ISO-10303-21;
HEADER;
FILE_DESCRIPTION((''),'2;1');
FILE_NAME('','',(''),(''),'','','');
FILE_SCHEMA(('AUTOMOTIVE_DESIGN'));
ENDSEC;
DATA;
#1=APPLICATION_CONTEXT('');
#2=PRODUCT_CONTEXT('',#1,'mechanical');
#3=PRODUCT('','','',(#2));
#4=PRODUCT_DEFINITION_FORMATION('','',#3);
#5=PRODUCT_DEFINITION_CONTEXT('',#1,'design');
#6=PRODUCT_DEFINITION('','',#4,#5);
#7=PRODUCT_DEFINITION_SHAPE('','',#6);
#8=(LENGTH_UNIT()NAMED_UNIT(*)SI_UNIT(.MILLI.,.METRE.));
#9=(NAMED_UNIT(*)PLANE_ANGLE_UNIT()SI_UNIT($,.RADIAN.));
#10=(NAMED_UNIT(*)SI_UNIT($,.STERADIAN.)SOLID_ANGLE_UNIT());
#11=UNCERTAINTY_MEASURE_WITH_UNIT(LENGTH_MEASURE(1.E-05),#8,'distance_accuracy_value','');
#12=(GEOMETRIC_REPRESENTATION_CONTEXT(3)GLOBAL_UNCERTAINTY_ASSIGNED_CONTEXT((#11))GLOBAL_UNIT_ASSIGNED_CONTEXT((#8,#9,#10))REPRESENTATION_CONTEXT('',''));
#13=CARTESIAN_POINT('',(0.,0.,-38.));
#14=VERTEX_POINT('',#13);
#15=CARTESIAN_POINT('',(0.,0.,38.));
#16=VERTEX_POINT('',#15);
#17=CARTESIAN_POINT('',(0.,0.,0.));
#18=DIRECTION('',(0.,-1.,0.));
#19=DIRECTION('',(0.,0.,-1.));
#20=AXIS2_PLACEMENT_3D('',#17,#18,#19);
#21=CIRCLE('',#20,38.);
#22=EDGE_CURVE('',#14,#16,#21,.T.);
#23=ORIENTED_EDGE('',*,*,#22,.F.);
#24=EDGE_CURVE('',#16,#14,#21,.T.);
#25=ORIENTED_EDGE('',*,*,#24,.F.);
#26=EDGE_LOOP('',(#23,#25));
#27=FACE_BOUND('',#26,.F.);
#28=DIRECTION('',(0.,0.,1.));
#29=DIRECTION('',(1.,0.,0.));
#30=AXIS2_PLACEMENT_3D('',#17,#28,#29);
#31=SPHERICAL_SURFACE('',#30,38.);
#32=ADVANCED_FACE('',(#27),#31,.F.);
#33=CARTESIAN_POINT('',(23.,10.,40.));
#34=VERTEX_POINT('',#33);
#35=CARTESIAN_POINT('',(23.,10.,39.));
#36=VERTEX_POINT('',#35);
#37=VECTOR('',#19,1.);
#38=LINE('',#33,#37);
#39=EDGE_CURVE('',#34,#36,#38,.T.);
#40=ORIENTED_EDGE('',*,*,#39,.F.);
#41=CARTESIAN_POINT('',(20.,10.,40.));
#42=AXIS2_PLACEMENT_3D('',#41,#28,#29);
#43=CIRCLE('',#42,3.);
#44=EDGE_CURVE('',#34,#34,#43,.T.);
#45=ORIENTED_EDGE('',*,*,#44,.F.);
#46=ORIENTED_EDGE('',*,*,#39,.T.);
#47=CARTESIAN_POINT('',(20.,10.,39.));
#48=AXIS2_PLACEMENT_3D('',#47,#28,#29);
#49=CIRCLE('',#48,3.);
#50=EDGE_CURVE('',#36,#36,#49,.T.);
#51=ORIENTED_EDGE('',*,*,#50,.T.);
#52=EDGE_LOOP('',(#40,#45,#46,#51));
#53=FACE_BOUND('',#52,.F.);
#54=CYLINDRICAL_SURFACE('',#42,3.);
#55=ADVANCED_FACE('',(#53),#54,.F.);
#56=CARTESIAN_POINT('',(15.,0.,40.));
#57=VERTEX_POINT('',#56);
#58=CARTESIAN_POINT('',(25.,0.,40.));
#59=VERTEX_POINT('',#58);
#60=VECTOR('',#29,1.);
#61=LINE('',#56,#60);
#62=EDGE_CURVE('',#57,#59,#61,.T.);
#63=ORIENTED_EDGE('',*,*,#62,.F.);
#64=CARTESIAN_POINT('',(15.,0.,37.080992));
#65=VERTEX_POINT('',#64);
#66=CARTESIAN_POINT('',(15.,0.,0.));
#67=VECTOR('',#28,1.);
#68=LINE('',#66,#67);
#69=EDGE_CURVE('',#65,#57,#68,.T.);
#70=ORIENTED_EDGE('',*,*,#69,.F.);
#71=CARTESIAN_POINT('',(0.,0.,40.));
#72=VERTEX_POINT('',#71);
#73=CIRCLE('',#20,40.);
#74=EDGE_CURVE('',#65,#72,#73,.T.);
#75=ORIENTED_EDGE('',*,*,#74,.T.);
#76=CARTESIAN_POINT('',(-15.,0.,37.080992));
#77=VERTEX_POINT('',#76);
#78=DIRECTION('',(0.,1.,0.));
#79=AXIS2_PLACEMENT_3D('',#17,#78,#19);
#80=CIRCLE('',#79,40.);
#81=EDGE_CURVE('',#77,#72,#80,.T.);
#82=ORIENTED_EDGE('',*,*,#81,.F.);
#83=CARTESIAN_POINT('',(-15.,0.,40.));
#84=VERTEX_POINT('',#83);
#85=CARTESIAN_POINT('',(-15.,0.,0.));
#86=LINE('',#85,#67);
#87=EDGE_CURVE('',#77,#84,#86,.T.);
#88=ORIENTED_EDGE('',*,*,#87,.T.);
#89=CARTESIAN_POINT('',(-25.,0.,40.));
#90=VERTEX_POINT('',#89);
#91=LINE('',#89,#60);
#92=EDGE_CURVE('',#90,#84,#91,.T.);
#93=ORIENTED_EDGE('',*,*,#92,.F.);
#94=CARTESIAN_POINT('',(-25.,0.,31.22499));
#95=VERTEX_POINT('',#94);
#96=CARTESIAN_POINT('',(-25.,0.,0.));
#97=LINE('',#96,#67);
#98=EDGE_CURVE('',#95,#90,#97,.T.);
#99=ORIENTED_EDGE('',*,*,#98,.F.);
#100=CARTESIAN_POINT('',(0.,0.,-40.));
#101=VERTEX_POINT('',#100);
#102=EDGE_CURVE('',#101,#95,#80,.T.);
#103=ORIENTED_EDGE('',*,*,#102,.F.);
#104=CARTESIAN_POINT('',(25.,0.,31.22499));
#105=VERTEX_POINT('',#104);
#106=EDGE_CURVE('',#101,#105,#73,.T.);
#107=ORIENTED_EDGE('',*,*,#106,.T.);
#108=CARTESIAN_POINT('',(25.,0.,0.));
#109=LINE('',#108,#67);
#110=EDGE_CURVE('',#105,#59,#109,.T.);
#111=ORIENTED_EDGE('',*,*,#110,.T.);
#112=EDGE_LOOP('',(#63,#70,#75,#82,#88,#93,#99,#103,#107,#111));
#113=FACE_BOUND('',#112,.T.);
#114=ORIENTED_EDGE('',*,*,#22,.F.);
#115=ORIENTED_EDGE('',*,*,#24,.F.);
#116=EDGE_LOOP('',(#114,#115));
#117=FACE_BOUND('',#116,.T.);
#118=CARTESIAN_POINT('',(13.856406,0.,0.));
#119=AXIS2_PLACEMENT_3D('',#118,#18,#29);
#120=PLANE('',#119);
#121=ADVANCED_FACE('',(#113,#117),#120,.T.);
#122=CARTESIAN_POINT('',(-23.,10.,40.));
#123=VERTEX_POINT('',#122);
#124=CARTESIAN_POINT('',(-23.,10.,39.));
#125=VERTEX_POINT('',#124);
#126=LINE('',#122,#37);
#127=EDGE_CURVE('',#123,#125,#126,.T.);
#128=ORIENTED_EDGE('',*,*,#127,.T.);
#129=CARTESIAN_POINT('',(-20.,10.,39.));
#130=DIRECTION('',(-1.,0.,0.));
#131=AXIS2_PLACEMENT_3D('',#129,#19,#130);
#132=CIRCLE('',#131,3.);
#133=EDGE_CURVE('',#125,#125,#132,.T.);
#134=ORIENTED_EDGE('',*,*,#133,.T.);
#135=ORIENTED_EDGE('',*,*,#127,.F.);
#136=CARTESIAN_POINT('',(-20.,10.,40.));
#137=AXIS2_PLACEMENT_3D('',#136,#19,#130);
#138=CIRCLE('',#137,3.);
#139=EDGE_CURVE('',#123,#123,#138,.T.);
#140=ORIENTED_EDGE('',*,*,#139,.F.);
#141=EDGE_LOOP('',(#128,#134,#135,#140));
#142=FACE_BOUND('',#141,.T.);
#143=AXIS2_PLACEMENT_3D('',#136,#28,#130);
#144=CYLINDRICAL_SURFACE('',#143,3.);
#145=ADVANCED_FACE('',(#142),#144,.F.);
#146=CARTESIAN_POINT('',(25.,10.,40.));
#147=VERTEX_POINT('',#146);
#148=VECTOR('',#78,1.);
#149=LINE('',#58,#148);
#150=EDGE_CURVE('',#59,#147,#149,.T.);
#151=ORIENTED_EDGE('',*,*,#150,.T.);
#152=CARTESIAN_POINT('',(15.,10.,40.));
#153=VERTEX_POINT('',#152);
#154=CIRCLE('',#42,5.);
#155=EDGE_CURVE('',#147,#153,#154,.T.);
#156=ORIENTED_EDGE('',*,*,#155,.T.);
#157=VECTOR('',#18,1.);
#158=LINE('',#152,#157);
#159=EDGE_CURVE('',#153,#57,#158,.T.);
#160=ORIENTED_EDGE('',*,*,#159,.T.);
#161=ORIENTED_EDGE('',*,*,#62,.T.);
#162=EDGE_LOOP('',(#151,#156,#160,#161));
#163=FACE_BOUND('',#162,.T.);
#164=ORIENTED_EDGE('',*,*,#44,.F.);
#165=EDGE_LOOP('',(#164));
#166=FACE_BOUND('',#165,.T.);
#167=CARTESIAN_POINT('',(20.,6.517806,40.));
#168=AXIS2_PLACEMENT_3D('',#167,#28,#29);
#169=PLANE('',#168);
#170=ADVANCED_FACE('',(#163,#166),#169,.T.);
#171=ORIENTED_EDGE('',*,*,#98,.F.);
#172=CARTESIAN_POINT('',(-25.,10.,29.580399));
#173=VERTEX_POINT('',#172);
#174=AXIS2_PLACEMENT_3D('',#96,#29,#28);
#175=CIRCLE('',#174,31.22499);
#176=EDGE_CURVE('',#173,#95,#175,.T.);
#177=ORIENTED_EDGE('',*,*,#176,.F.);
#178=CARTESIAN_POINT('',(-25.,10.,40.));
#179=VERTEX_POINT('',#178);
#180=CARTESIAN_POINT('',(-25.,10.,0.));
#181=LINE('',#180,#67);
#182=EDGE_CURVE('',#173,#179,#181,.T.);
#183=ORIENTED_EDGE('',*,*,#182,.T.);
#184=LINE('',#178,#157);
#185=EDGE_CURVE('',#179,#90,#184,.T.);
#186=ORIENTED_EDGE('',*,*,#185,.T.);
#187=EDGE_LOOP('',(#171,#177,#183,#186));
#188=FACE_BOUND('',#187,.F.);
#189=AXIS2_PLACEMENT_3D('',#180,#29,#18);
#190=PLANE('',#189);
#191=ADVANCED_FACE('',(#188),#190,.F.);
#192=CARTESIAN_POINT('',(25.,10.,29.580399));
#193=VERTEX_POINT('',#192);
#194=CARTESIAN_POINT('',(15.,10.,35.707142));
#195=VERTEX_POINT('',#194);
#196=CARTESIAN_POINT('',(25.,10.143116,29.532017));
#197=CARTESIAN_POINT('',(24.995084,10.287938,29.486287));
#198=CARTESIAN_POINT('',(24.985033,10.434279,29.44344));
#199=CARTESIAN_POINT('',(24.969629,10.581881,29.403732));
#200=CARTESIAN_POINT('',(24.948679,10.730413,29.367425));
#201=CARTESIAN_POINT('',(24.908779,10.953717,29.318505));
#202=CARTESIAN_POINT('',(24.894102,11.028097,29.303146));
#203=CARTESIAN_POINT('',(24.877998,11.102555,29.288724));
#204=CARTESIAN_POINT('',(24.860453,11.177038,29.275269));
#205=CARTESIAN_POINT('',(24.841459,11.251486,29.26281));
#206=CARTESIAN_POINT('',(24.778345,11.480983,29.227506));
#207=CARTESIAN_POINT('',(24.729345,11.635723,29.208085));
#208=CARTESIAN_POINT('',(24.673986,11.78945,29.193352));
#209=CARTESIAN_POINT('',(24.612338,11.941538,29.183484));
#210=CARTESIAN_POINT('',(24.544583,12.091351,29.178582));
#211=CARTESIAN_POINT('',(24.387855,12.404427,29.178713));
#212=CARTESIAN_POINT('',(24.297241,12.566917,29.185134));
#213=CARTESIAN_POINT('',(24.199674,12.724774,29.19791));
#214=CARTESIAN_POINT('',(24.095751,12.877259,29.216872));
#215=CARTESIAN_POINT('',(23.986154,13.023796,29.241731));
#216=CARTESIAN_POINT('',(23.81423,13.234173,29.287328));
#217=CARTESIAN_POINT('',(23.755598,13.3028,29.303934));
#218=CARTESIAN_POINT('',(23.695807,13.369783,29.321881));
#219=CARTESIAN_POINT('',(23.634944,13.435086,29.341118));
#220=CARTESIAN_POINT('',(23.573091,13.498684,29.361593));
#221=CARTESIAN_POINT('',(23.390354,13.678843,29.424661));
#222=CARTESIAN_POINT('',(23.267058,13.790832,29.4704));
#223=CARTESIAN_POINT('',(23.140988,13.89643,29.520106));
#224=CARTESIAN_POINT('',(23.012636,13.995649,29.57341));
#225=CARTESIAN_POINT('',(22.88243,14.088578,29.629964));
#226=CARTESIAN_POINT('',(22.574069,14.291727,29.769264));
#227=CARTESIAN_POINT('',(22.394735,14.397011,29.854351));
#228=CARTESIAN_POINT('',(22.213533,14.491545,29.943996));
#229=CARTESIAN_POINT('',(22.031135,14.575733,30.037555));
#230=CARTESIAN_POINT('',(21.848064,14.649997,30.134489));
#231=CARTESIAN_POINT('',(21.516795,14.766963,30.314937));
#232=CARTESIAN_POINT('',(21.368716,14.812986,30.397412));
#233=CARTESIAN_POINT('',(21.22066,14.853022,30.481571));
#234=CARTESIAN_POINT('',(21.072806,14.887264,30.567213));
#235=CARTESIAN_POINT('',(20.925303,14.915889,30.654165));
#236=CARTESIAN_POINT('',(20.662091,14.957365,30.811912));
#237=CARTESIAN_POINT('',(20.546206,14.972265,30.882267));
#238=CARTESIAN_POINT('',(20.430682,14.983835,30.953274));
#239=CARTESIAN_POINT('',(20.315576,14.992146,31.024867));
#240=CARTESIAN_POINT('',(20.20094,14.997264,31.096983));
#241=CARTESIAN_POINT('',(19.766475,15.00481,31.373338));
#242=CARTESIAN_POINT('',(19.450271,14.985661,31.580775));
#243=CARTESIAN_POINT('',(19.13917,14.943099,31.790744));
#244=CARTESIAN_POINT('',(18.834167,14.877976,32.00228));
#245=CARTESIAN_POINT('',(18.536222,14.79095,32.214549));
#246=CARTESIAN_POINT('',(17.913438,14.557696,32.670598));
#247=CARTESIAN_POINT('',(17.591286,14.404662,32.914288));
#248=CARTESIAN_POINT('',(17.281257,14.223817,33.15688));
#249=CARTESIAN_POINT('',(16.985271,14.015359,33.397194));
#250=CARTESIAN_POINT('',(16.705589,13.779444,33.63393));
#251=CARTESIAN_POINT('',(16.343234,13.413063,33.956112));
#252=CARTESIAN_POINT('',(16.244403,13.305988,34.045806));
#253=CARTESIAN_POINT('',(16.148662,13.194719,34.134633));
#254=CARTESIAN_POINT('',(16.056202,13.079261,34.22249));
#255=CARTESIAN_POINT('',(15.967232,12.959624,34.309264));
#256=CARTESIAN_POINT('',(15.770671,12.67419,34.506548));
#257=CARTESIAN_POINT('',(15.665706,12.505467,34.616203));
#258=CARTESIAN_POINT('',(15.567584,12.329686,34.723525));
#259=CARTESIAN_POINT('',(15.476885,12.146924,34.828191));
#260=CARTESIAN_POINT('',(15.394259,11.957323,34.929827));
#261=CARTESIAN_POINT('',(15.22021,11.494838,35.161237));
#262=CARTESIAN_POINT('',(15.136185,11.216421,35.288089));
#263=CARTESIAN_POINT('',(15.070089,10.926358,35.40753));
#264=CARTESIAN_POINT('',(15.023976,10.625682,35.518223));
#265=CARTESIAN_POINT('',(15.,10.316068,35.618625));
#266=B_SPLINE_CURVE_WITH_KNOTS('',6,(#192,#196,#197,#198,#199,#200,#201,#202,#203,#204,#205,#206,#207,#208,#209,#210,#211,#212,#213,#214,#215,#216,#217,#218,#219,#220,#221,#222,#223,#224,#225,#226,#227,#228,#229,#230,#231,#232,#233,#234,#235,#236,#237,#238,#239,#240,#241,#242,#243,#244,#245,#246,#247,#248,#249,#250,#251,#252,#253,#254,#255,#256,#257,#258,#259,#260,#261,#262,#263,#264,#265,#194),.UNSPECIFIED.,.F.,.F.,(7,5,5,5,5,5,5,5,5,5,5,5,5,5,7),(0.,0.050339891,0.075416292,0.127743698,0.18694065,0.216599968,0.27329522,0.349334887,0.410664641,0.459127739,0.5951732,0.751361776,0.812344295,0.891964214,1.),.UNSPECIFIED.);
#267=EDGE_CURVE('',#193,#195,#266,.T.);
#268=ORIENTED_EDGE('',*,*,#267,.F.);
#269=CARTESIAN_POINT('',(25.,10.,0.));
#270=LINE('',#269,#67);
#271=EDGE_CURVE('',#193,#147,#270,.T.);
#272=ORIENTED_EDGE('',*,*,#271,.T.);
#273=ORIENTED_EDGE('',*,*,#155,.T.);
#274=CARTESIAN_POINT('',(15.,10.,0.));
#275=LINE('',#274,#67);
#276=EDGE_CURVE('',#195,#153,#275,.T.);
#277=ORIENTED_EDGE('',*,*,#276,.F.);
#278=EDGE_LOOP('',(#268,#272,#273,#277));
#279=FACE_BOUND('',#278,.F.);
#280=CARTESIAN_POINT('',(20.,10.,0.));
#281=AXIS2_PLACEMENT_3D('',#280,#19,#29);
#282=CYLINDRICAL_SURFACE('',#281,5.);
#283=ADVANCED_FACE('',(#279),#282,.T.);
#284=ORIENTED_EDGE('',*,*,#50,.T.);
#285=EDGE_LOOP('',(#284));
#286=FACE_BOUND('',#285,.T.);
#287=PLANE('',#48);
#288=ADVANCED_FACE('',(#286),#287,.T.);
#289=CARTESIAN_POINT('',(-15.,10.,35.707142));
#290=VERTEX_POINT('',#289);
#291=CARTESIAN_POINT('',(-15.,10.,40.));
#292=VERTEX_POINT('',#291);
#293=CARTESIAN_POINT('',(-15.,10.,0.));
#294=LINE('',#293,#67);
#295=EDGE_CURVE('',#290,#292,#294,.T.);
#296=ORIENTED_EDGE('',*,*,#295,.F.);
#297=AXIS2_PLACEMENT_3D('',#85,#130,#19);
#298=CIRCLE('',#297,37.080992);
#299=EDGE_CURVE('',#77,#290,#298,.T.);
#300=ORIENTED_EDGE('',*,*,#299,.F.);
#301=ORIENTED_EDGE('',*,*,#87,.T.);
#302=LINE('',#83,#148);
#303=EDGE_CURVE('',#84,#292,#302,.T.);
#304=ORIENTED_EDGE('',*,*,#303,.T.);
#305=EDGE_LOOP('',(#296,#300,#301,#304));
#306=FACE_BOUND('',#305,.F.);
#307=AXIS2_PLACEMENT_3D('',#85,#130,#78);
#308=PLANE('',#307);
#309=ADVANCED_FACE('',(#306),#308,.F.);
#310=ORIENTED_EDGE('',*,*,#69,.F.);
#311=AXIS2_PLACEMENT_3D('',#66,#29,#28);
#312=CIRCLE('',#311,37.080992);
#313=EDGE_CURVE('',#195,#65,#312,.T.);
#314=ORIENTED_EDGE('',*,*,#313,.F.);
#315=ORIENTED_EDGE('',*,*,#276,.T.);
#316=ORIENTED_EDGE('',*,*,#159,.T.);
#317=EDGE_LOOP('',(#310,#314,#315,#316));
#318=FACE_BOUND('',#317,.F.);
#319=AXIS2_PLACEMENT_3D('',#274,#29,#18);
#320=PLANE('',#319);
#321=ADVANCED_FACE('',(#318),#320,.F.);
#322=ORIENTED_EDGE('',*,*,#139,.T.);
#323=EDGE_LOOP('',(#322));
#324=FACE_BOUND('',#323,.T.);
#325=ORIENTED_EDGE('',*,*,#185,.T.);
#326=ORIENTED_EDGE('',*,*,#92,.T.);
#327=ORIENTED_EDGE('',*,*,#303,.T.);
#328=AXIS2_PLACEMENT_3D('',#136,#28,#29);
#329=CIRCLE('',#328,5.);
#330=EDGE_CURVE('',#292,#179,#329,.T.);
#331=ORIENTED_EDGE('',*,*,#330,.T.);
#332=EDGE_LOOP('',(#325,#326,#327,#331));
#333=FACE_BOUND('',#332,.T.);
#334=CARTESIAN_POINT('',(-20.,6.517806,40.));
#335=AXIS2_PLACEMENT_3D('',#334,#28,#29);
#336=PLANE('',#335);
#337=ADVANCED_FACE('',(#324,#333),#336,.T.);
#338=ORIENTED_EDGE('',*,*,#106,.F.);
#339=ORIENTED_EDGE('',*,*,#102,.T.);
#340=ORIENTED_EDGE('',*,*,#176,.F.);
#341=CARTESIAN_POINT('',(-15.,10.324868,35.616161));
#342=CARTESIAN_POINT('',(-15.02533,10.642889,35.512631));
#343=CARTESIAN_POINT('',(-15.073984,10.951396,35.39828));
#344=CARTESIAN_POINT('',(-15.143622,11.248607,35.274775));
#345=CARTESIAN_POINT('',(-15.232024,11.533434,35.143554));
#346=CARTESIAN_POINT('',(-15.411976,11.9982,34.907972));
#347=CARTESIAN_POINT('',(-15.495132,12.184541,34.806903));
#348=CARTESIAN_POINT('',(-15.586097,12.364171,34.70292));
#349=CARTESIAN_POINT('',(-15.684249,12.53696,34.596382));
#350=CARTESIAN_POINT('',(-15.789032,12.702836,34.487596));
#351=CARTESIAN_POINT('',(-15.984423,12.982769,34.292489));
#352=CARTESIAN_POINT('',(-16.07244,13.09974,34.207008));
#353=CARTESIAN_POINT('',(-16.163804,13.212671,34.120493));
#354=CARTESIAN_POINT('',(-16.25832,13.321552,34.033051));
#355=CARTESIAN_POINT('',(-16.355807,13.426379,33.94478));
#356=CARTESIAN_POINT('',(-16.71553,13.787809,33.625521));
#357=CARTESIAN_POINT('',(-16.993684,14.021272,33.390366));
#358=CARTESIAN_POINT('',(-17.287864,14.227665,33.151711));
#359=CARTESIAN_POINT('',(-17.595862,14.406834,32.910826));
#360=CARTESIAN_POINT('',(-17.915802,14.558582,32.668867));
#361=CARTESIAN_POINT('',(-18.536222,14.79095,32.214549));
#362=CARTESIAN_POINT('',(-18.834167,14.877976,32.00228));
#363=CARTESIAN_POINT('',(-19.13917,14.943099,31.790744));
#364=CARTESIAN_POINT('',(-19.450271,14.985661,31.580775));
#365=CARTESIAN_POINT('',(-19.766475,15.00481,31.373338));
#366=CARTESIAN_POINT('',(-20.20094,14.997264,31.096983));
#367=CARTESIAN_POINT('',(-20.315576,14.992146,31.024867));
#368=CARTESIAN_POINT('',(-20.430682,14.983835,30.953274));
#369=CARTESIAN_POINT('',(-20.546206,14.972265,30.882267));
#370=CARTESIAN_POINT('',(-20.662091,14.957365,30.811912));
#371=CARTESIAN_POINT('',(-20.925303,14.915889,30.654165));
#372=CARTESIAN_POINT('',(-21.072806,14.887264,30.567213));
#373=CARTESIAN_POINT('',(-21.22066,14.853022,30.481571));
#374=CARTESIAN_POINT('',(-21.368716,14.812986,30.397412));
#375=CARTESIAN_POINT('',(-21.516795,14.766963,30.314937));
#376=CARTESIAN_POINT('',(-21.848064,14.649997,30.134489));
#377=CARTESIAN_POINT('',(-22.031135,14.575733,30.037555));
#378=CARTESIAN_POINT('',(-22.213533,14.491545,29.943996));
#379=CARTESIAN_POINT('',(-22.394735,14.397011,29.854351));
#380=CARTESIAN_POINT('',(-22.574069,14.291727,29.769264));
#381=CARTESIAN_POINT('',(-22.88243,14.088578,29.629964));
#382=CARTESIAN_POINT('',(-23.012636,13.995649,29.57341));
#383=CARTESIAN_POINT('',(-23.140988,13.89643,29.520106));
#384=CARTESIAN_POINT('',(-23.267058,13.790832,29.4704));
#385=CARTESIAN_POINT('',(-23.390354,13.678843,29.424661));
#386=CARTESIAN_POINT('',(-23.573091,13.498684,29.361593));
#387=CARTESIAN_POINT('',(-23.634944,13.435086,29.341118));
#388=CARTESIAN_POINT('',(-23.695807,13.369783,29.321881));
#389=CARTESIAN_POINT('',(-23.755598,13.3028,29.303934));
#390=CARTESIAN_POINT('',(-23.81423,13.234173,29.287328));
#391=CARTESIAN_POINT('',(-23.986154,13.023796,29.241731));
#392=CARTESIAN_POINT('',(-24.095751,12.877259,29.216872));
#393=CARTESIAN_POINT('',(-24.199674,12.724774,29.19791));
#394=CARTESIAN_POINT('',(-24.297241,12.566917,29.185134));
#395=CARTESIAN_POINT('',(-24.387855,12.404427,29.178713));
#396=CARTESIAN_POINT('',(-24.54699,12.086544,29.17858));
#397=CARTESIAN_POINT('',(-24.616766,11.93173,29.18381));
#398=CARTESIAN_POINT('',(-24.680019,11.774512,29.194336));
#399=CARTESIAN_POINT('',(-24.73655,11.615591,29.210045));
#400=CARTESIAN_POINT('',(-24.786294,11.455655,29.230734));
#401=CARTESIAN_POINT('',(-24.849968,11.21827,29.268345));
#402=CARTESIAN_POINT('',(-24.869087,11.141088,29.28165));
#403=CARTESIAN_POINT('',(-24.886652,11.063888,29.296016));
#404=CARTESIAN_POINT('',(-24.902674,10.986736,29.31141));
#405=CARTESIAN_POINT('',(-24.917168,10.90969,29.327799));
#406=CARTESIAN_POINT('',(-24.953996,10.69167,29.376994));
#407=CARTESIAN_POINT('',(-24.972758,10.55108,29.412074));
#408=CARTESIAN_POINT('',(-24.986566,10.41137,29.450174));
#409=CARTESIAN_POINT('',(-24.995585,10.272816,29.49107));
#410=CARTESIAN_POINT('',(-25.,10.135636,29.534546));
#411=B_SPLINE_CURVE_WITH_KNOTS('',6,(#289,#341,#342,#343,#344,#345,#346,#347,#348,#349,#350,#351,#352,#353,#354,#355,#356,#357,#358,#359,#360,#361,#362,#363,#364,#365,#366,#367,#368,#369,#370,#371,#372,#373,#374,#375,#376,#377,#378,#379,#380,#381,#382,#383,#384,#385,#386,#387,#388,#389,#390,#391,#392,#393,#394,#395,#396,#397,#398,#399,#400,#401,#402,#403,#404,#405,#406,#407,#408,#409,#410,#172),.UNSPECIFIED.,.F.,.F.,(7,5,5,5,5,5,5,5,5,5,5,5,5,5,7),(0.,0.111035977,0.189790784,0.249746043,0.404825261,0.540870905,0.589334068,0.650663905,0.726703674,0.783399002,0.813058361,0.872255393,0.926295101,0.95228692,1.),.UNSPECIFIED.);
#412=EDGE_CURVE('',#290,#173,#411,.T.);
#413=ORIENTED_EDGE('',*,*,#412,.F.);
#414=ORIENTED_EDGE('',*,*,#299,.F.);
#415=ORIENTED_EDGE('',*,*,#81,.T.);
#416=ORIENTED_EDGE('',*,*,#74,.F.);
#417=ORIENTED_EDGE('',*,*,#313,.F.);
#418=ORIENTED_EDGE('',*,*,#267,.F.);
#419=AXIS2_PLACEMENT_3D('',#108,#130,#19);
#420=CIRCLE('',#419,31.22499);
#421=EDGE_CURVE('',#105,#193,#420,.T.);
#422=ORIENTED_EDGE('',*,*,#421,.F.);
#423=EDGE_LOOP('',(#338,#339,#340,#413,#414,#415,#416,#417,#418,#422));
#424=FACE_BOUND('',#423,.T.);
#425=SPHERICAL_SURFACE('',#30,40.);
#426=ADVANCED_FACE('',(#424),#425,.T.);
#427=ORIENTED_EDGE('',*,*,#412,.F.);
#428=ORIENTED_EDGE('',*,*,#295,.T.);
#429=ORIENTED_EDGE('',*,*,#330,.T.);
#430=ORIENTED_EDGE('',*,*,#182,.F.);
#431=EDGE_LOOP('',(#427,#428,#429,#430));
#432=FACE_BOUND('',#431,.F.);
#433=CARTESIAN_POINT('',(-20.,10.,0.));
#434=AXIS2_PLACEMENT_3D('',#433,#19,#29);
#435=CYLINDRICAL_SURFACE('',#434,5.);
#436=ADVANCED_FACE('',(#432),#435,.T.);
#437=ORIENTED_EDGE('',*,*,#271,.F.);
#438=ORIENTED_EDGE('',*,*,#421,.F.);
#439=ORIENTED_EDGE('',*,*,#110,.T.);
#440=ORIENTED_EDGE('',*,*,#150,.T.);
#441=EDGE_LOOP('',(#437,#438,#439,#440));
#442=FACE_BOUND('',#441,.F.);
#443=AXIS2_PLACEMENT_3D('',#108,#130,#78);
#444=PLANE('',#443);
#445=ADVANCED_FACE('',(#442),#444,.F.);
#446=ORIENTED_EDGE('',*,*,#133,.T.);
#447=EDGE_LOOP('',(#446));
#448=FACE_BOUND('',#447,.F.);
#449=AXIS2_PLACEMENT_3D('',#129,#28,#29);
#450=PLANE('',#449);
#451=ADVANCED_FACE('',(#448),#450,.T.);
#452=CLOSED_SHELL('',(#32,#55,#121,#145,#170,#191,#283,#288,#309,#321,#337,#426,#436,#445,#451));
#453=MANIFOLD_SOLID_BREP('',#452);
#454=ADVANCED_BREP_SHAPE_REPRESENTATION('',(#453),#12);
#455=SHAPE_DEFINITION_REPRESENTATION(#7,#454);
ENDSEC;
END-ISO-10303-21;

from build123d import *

# Parameters (mm, degrees)
F1_ANGLE = 180
F3_DEPTH = 40
F6_R     = 3
F7_DEPTH = 1


# Not quite as in the source:
# - a pattern or mirror of a feature is missing from the dataset's text; its kind, count and spacing are read off the source's solid


with BuildPart() as f1:
    # F0 (on Front) → F1 (revolve)
    with BuildSketch(Plane.XZ):
        with BuildLine():
            Line((0, 0), (0, -40))
            ThreePointArc((0, -40), (40, 0), (0, 40))
            Line((0, 40), (0, 0))
        make_face()
    revolve(axis=Axis((0, 0, 20), (0, 0, 1)), revolution_arc=F1_ANGLE)

    # F2 (on Top) → F3 (join)
    with BuildSketch(Plane.XY):
        with BuildLine():
            Line((-25, 0), (-15, 0))
            Line((-15, 0), (-15, 10))
            ThreePointArc((-15, 10), (-20, 15), (-25, 10))
            Line((-25, 10), (-25, 0))
        make_face()
        with BuildLine():
            Line((15, 10), (15, 0))
            Line((15, 0), (25, 0))
            Line((25, 0), (25, 10))
            ThreePointArc((25, 10), (20, 15), (15, 10))
        make_face()
    extrude(amount=F3_DEPTH)

    # F4 (on face) → F5 (revolve, cut)
    with BuildSketch(Plane.XZ):
        with BuildLine():
            Line((0, 38), (0, -38))
            ThreePointArc((0, -38), (38, 0), (0, 38))
        make_face()
    revolve(axis=Axis((0, 0, 0), (0, 0, 1)), mode=Mode.SUBTRACT)

    # F6 (on face) → F7 (cut)
    with BuildSketch(Plane.XY.offset(40)):
        with Locations((20, 10)):
            Circle(F6_R)
    f7 = extrude(amount=-F7_DEPTH, mode=Mode.SUBTRACT)

    # F7_copies: F7 across plane
    add(f7.mirror(Plane(origin=(0, 0, 0), x_dir=(0, 0, -1), z_dir=(-1, 0, 0))), mode=Mode.SUBTRACT)


solid = f1.part
